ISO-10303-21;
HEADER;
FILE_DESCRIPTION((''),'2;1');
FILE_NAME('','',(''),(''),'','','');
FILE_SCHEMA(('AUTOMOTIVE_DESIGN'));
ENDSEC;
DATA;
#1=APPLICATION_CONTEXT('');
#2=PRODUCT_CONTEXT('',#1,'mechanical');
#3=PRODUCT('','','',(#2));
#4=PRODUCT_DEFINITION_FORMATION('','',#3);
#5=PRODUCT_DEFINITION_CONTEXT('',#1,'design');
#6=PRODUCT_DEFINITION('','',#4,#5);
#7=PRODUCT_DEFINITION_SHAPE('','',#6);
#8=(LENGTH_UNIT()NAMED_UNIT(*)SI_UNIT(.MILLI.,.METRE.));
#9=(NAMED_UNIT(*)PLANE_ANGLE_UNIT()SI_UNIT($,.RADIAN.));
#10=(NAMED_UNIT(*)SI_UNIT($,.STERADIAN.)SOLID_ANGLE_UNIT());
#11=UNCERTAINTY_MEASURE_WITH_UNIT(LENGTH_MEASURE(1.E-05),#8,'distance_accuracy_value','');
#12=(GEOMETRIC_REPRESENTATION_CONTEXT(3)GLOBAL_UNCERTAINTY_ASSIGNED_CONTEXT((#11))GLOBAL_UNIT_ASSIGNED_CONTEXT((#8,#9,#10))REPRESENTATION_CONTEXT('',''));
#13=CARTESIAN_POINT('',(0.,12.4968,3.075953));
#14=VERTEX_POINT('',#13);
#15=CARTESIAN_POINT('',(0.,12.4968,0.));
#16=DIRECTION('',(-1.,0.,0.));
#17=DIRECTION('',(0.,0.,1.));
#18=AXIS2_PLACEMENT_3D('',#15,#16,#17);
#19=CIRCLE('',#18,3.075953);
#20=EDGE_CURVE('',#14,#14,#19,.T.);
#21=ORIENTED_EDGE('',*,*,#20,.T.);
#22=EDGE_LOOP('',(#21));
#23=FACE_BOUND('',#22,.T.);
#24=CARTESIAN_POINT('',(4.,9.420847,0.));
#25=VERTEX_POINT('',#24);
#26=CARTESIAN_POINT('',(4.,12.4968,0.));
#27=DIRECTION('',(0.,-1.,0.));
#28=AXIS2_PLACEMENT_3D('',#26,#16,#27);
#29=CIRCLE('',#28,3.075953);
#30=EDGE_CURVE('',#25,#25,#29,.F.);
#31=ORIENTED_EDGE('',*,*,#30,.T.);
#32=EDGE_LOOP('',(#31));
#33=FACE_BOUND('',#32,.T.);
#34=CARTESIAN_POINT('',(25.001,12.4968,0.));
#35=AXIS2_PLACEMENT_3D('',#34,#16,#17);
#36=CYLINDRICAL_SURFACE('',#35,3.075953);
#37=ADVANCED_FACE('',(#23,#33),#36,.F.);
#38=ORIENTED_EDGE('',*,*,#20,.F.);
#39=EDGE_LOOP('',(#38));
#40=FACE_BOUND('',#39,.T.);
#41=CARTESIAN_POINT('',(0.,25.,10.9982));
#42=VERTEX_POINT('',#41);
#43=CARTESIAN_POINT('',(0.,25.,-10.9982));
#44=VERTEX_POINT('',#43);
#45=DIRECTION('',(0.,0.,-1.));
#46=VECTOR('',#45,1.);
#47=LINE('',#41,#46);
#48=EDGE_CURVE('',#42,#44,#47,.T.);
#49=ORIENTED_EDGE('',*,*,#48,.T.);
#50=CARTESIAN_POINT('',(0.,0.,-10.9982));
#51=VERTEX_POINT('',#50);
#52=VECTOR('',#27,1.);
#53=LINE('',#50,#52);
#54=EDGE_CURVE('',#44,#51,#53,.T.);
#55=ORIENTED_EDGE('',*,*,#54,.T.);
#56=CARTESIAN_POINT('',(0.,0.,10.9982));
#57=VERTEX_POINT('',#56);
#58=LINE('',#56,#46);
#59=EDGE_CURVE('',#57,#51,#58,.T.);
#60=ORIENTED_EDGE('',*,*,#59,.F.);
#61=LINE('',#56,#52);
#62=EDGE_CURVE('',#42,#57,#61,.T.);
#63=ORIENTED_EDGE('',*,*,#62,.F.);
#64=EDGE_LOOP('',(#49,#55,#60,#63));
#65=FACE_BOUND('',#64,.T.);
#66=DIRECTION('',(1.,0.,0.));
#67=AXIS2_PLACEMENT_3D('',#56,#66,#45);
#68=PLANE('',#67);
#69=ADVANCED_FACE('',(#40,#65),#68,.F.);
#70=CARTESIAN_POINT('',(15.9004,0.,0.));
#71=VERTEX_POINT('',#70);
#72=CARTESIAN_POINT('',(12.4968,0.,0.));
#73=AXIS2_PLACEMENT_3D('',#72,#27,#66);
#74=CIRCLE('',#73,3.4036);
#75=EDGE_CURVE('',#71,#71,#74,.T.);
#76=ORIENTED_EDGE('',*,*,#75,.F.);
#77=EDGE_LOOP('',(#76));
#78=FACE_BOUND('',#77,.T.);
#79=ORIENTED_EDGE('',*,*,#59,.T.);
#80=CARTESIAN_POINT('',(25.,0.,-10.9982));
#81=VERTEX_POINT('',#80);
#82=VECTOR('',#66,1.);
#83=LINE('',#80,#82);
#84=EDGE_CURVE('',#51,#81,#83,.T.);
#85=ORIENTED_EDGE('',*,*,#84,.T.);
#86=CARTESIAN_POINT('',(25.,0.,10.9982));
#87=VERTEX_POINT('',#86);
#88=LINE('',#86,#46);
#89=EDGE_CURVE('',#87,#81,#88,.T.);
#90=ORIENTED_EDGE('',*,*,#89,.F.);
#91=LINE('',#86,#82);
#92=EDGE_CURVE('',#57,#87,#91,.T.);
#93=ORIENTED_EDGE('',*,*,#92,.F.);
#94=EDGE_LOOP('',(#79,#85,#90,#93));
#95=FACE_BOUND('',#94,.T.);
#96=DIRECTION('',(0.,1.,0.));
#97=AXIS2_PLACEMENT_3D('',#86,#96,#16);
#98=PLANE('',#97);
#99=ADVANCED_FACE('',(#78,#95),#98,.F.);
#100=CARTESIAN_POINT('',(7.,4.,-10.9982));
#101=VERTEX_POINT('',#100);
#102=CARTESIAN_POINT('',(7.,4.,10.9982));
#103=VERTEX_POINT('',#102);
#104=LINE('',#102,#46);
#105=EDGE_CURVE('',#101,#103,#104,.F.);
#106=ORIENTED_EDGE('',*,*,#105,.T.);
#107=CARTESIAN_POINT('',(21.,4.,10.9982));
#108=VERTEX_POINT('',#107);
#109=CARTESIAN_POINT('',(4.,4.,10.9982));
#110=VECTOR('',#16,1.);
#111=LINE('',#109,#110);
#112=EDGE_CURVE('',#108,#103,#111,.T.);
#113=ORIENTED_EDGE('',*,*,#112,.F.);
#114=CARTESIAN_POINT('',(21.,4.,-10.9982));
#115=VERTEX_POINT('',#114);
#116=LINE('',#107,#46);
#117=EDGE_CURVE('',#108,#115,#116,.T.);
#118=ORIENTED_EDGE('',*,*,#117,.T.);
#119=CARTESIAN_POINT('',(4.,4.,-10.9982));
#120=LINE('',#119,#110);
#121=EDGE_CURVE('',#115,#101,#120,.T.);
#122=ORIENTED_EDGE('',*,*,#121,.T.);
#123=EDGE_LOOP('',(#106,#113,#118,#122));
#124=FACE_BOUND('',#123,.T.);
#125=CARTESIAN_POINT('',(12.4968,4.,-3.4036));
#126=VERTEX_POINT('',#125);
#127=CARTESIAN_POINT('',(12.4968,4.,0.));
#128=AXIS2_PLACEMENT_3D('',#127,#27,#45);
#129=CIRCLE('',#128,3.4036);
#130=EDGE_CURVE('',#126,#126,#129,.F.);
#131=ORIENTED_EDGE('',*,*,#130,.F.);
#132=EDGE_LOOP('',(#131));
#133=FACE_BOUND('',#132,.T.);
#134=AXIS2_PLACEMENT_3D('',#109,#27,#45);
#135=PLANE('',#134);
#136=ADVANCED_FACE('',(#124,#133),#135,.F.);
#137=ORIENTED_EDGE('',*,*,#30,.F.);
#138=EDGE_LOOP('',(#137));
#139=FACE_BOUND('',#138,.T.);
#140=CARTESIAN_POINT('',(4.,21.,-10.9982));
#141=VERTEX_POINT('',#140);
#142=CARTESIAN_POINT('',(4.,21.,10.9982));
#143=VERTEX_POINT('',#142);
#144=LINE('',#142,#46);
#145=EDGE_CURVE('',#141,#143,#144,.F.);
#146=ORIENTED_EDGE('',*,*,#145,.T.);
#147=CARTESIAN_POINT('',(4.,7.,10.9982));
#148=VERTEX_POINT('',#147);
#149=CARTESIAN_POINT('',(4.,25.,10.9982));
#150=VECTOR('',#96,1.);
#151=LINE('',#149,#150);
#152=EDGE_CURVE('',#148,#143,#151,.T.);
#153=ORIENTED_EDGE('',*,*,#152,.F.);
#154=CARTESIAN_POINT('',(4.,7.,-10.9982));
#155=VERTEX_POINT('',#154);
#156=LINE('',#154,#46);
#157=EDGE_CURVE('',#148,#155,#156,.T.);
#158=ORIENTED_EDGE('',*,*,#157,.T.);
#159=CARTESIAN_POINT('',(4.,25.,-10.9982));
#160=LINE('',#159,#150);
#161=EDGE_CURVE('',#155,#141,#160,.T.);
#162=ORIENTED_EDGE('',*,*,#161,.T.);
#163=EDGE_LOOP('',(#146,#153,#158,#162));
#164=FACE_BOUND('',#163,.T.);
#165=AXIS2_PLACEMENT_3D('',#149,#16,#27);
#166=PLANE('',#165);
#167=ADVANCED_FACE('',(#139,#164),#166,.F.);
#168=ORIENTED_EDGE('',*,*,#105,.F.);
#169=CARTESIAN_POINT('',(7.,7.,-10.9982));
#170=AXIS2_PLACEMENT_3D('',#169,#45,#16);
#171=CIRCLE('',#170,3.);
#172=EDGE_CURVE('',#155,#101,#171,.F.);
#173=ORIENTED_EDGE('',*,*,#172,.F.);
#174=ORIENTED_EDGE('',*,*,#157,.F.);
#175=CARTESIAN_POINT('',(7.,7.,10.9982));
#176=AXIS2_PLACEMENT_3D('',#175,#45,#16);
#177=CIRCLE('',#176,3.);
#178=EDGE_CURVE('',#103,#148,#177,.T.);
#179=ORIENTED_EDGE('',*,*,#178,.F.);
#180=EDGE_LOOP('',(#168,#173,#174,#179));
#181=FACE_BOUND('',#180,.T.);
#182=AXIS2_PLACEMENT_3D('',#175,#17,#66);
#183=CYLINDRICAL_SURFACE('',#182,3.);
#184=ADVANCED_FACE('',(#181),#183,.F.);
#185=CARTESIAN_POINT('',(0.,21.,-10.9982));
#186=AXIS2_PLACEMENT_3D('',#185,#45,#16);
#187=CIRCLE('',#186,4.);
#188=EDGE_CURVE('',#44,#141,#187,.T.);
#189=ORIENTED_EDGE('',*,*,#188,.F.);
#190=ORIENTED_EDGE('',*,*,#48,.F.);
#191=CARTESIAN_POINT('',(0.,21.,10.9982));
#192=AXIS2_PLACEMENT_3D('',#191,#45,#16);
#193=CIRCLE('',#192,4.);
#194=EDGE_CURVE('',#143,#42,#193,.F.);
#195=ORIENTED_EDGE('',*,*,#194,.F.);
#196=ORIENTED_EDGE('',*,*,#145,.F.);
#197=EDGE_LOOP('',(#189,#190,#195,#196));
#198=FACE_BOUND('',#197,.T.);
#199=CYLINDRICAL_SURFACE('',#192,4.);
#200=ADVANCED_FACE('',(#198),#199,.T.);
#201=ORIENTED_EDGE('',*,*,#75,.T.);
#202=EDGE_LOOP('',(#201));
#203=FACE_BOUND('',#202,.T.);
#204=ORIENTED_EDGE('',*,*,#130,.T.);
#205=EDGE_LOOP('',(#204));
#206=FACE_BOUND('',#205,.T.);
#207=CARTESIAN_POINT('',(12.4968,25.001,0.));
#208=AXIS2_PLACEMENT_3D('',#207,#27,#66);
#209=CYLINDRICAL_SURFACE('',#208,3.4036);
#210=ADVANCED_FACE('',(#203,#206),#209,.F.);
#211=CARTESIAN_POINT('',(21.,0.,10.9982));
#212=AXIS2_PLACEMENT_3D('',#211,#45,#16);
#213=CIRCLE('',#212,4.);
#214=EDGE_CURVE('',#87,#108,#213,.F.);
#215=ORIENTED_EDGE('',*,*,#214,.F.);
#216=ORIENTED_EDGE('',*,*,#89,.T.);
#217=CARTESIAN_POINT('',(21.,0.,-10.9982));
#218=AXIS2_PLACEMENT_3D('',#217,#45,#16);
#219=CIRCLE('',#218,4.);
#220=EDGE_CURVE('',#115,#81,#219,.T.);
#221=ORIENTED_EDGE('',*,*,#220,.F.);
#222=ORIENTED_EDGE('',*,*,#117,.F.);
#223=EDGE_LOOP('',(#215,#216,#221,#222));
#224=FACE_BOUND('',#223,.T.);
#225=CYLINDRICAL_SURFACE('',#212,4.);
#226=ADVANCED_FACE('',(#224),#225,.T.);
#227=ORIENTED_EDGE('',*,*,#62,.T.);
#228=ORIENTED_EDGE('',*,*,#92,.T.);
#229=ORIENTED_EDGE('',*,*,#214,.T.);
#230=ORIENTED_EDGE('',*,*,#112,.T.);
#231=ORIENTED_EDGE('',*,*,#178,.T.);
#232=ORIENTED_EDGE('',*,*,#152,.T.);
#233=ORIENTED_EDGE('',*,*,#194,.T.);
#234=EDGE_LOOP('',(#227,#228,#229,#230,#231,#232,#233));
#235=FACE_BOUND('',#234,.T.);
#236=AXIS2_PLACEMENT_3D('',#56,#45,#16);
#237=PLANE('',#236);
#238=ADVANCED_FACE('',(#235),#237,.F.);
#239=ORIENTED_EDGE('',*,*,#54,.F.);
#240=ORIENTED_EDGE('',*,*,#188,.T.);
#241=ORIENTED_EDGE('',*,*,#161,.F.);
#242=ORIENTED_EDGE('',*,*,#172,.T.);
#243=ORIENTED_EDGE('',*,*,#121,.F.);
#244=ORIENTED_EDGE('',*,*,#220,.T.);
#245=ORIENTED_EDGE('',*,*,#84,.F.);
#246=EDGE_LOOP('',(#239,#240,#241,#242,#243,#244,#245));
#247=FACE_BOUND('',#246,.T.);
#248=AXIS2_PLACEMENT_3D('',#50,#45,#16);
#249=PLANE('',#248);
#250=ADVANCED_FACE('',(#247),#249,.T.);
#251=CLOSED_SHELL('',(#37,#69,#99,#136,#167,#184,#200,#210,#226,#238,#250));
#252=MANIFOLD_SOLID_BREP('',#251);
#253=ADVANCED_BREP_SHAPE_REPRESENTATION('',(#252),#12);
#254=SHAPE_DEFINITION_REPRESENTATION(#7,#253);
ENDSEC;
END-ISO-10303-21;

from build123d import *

# Parameters (mm, degrees)
BOSS_EXTRUDE1_DEPTH = 10.9982
FILLET1_R           = 4
FILLET2_R           = 3
CUT_EXTRUDE1_REACH  = 39.026
SKETCH2_R           = 3.4036
CUT_EXTRUDE2_REACH  = 39.026
SKETCH4_R           = 3.075953135


with BuildPart() as part:
    # Sketch1 → Boss-Extrude1 (new, symmetric)
    with BuildSketch(Plane.XY):
        Polygon((0, 0), (0, 25), (4, 25), (4, 4), (25, 4), (25, 0), align=None)
    extrude(amount=BOSS_EXTRUDE1_DEPTH, both=True)

    # Fillet1
    fillet1_edges = [part.edges().sort_by_distance(p)[0] for p in [
        (25, 4, 0),
        (4, 25, 0),
    ]]
    fillet(fillet1_edges, radius=FILLET1_R - 0.0001)  # a hair under: the kernel refuses the full size

    # Fillet2
    fillet2_edges = [part.edges().sort_by_distance(p)[0] for p in [
        (4, 4, 0),
    ]]
    fillet(fillet2_edges, radius=FILLET2_R)

    # Sketch2 → Cut-Extrude1 (cut, up to next)
    with BuildSketch(Plane.XZ, mode=Mode.PRIVATE) as cut_extrude1_sk1:
        with Locations((12.4968, 0)):
            Circle(SKETCH2_R)
    cut_extrude1_tool1 = extrude(cut_extrude1_sk1.sketch, amount=-CUT_EXTRUDE1_REACH, mode=Mode.PRIVATE) & part.part
    add(cut_extrude1_tool1.solids().sort_by_distance((12.4968, 0, 0))[0], mode=Mode.SUBTRACT)

    # Sketch4 → Cut-Extrude2 (cut, up to next)
    with BuildSketch(Plane.ZY, mode=Mode.PRIVATE) as cut_extrude2_sk1:
        with Locations((0, 12.4968)):
            Circle(SKETCH4_R)
    cut_extrude2_tool1 = extrude(cut_extrude2_sk1.sketch, amount=-CUT_EXTRUDE2_REACH, mode=Mode.PRIVATE) & part.part
    add(cut_extrude2_tool1.solids().sort_by_distance((0, 12.4968, 0))[0], mode=Mode.SUBTRACT)


solid = part.part
